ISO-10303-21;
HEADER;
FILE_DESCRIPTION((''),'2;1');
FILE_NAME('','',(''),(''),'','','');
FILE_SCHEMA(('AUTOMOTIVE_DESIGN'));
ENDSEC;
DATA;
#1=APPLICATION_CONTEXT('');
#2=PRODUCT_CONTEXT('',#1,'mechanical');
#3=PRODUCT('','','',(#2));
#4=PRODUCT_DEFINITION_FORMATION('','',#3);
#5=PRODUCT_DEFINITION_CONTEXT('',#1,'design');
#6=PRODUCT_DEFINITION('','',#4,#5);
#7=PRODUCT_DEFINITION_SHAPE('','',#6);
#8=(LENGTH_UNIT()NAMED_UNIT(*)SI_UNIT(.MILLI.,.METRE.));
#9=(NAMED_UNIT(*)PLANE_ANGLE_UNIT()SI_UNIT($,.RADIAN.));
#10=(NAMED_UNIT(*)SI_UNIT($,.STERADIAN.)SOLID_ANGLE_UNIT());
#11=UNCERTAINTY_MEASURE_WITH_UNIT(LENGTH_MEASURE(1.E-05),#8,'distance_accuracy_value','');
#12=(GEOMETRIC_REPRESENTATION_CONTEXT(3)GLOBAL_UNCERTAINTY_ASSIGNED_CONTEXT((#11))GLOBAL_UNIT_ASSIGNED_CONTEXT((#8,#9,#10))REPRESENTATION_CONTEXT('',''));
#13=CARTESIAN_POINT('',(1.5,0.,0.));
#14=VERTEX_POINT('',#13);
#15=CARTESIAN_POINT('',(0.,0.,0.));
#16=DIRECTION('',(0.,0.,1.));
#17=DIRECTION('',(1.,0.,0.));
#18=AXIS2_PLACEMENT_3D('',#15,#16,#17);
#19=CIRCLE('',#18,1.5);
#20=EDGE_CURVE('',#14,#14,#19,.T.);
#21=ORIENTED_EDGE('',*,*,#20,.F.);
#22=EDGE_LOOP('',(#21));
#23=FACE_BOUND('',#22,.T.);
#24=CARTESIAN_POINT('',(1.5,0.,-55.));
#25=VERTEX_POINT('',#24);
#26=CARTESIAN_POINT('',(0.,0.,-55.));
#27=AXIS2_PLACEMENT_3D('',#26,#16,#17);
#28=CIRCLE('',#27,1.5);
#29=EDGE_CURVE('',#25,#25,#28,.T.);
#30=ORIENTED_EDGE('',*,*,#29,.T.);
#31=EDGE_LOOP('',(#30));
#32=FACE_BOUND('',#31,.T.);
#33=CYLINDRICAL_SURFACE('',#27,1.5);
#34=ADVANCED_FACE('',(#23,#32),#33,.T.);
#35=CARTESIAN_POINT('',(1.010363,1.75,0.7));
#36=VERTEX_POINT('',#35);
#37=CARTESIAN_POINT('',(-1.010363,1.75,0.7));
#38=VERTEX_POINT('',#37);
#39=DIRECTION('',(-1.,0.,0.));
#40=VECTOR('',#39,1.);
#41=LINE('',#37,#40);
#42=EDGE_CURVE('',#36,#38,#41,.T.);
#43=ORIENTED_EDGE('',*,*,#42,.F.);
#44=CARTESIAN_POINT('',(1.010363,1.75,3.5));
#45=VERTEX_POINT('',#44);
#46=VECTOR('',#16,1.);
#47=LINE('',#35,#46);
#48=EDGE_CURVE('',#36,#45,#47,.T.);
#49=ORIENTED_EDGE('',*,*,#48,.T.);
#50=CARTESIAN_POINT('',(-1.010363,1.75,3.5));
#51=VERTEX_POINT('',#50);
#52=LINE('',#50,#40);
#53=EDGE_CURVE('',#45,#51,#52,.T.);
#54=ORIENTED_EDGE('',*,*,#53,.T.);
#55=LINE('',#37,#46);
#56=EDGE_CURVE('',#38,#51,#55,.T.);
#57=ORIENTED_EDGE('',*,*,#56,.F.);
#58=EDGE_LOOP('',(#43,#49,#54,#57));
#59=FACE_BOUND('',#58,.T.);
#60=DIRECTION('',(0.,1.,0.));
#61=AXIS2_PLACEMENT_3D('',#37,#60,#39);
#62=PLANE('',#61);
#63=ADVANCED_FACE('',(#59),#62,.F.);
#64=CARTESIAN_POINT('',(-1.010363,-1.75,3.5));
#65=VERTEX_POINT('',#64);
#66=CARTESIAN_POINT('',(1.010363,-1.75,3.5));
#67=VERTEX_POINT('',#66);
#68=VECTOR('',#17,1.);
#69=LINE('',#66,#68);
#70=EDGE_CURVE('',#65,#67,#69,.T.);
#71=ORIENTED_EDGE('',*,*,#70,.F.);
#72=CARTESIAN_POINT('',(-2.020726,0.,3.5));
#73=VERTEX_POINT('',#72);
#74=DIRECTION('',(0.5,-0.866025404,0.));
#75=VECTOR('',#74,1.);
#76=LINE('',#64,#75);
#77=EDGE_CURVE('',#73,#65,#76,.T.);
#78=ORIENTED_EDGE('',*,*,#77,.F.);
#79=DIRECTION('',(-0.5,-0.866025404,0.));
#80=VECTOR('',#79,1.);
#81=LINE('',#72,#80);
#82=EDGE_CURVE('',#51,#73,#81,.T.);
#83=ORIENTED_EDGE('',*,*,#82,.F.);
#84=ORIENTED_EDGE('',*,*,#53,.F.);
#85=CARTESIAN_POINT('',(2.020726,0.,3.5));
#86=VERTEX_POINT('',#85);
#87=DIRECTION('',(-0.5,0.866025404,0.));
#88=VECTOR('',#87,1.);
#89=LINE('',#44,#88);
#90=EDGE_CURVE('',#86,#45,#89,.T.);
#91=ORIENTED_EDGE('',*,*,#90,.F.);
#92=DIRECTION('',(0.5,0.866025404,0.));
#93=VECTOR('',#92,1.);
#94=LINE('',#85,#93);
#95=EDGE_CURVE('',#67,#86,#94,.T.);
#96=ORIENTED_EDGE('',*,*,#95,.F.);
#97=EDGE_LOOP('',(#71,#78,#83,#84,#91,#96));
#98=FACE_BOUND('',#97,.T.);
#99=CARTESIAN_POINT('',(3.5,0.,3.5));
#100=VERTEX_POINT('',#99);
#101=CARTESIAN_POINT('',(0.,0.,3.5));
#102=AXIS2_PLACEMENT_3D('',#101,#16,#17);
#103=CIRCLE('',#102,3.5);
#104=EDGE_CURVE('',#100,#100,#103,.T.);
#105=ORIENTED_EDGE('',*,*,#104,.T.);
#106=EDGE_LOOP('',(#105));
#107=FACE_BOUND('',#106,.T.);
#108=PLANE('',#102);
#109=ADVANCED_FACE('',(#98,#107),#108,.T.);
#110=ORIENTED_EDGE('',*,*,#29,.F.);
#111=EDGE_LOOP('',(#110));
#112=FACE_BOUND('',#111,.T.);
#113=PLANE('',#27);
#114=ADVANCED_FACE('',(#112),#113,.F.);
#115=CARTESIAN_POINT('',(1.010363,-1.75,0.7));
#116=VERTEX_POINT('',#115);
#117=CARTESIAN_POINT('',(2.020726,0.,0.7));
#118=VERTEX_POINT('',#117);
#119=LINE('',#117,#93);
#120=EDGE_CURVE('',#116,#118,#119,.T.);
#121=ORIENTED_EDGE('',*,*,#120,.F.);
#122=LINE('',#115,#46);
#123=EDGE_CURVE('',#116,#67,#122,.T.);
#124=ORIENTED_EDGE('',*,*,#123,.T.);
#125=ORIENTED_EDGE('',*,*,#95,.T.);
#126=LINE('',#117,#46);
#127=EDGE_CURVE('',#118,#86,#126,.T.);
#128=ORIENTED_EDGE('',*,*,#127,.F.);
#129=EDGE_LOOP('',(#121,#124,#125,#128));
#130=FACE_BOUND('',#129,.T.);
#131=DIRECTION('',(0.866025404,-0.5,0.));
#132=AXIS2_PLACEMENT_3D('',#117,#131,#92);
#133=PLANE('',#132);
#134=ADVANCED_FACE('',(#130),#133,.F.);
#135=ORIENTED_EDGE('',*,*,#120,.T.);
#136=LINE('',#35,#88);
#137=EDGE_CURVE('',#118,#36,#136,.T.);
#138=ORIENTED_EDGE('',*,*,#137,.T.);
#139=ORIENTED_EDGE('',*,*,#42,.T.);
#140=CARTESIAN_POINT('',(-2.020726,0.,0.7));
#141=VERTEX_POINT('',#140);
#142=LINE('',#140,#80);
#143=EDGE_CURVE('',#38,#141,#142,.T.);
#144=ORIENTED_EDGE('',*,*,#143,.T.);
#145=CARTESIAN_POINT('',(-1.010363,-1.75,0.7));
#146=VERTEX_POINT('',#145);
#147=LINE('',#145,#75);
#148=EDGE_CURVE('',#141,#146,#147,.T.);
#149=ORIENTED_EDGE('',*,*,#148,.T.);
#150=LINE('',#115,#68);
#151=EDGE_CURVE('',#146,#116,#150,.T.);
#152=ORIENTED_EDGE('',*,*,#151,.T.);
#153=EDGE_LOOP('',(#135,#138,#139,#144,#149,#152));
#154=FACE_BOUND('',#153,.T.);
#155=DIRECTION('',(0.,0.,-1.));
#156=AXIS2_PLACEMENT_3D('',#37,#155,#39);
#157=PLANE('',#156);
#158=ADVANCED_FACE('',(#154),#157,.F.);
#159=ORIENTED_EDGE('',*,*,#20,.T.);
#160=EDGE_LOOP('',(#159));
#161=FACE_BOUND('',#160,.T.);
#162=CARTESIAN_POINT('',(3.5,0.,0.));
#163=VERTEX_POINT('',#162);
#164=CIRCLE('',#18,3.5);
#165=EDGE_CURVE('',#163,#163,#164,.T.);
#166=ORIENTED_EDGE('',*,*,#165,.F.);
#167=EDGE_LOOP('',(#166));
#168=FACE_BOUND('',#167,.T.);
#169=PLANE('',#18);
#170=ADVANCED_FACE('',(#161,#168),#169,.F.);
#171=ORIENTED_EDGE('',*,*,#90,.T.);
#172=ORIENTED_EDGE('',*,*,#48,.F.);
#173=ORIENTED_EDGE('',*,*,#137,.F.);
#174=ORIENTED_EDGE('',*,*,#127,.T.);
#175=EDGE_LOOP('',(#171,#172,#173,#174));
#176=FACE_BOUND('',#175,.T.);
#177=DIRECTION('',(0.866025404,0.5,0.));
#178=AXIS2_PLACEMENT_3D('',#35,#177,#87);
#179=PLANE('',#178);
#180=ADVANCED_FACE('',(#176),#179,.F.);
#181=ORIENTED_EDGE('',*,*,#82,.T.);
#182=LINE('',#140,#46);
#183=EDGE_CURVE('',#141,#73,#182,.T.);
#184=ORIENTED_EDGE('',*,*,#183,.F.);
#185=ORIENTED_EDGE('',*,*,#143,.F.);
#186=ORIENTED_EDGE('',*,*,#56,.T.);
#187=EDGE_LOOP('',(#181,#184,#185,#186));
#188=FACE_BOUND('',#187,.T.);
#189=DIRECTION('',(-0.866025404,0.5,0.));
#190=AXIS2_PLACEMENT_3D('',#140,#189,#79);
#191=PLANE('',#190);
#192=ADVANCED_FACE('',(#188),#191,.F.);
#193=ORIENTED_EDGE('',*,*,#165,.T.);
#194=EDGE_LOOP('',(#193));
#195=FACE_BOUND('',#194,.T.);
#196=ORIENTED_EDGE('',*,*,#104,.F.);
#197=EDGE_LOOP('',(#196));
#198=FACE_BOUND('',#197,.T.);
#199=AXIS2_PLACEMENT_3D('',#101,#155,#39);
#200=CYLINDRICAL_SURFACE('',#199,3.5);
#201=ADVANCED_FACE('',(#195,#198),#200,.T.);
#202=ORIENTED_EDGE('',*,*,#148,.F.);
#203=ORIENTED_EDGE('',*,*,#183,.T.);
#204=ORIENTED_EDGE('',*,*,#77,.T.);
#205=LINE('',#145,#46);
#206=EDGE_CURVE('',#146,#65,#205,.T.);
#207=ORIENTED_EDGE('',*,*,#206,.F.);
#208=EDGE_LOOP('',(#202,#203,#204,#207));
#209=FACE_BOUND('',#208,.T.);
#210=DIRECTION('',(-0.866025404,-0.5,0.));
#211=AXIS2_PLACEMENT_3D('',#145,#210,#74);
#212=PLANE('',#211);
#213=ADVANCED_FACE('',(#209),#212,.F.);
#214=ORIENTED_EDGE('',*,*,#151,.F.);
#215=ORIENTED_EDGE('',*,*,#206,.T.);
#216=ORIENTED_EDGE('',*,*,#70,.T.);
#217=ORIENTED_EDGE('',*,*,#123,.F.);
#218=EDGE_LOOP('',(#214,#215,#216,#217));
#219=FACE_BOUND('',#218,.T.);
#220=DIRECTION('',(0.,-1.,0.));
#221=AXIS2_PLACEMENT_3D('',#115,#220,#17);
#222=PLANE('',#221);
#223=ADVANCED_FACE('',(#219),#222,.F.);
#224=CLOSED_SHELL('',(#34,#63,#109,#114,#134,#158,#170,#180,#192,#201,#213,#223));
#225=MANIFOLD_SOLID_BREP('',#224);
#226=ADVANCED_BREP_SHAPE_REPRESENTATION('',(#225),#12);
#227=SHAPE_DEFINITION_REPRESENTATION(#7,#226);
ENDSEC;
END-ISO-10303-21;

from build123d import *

# Parameters (mm, degrees)
HEAD_BOSS_EXTRUDE1_OUTLINE_R = 3.5
HEAD_BOSS_EXTRUDE1_DEPTH     = 3.5
HEAD_HEX_CUT_EXTRUDE1_DEPTH  = 2.8
SKETCH2_R                    = 1.5
SCREW_BOSS_EXTRUDE2_DEPTH    = 55


# Read off the part's stored shape, not the designer's step: Head Boss-Extrude1
with BuildPart() as part:
    # Head Boss-Extrude1 outline → Head Boss-Extrude1 (new body)
    with BuildSketch(Plane.XY):
        Circle(HEAD_BOSS_EXTRUDE1_OUTLINE_R)
    extrude(amount=HEAD_BOSS_EXTRUDE1_DEPTH)

    # Sketch3 → Head Hex Cut-Extrude1 (cut)
    with BuildSketch(Plane.XY.offset(3.5)):
        Polygon((-1.010362971, 1.75), (1.010362971, 1.75), (2.020725942, 0), (1.010362971, -1.75), (-1.010362971, -1.75), (-2.020725942, 0), align=None)
    extrude(amount=-HEAD_HEX_CUT_EXTRUDE1_DEPTH, mode=Mode.SUBTRACT)

    # Sketch2 → Screw Boss-Extrude2 (add)
    with BuildSketch(Plane.XY):
        Circle(SKETCH2_R)
    extrude(amount=-SCREW_BOSS_EXTRUDE2_DEPTH)


solid = part.part
